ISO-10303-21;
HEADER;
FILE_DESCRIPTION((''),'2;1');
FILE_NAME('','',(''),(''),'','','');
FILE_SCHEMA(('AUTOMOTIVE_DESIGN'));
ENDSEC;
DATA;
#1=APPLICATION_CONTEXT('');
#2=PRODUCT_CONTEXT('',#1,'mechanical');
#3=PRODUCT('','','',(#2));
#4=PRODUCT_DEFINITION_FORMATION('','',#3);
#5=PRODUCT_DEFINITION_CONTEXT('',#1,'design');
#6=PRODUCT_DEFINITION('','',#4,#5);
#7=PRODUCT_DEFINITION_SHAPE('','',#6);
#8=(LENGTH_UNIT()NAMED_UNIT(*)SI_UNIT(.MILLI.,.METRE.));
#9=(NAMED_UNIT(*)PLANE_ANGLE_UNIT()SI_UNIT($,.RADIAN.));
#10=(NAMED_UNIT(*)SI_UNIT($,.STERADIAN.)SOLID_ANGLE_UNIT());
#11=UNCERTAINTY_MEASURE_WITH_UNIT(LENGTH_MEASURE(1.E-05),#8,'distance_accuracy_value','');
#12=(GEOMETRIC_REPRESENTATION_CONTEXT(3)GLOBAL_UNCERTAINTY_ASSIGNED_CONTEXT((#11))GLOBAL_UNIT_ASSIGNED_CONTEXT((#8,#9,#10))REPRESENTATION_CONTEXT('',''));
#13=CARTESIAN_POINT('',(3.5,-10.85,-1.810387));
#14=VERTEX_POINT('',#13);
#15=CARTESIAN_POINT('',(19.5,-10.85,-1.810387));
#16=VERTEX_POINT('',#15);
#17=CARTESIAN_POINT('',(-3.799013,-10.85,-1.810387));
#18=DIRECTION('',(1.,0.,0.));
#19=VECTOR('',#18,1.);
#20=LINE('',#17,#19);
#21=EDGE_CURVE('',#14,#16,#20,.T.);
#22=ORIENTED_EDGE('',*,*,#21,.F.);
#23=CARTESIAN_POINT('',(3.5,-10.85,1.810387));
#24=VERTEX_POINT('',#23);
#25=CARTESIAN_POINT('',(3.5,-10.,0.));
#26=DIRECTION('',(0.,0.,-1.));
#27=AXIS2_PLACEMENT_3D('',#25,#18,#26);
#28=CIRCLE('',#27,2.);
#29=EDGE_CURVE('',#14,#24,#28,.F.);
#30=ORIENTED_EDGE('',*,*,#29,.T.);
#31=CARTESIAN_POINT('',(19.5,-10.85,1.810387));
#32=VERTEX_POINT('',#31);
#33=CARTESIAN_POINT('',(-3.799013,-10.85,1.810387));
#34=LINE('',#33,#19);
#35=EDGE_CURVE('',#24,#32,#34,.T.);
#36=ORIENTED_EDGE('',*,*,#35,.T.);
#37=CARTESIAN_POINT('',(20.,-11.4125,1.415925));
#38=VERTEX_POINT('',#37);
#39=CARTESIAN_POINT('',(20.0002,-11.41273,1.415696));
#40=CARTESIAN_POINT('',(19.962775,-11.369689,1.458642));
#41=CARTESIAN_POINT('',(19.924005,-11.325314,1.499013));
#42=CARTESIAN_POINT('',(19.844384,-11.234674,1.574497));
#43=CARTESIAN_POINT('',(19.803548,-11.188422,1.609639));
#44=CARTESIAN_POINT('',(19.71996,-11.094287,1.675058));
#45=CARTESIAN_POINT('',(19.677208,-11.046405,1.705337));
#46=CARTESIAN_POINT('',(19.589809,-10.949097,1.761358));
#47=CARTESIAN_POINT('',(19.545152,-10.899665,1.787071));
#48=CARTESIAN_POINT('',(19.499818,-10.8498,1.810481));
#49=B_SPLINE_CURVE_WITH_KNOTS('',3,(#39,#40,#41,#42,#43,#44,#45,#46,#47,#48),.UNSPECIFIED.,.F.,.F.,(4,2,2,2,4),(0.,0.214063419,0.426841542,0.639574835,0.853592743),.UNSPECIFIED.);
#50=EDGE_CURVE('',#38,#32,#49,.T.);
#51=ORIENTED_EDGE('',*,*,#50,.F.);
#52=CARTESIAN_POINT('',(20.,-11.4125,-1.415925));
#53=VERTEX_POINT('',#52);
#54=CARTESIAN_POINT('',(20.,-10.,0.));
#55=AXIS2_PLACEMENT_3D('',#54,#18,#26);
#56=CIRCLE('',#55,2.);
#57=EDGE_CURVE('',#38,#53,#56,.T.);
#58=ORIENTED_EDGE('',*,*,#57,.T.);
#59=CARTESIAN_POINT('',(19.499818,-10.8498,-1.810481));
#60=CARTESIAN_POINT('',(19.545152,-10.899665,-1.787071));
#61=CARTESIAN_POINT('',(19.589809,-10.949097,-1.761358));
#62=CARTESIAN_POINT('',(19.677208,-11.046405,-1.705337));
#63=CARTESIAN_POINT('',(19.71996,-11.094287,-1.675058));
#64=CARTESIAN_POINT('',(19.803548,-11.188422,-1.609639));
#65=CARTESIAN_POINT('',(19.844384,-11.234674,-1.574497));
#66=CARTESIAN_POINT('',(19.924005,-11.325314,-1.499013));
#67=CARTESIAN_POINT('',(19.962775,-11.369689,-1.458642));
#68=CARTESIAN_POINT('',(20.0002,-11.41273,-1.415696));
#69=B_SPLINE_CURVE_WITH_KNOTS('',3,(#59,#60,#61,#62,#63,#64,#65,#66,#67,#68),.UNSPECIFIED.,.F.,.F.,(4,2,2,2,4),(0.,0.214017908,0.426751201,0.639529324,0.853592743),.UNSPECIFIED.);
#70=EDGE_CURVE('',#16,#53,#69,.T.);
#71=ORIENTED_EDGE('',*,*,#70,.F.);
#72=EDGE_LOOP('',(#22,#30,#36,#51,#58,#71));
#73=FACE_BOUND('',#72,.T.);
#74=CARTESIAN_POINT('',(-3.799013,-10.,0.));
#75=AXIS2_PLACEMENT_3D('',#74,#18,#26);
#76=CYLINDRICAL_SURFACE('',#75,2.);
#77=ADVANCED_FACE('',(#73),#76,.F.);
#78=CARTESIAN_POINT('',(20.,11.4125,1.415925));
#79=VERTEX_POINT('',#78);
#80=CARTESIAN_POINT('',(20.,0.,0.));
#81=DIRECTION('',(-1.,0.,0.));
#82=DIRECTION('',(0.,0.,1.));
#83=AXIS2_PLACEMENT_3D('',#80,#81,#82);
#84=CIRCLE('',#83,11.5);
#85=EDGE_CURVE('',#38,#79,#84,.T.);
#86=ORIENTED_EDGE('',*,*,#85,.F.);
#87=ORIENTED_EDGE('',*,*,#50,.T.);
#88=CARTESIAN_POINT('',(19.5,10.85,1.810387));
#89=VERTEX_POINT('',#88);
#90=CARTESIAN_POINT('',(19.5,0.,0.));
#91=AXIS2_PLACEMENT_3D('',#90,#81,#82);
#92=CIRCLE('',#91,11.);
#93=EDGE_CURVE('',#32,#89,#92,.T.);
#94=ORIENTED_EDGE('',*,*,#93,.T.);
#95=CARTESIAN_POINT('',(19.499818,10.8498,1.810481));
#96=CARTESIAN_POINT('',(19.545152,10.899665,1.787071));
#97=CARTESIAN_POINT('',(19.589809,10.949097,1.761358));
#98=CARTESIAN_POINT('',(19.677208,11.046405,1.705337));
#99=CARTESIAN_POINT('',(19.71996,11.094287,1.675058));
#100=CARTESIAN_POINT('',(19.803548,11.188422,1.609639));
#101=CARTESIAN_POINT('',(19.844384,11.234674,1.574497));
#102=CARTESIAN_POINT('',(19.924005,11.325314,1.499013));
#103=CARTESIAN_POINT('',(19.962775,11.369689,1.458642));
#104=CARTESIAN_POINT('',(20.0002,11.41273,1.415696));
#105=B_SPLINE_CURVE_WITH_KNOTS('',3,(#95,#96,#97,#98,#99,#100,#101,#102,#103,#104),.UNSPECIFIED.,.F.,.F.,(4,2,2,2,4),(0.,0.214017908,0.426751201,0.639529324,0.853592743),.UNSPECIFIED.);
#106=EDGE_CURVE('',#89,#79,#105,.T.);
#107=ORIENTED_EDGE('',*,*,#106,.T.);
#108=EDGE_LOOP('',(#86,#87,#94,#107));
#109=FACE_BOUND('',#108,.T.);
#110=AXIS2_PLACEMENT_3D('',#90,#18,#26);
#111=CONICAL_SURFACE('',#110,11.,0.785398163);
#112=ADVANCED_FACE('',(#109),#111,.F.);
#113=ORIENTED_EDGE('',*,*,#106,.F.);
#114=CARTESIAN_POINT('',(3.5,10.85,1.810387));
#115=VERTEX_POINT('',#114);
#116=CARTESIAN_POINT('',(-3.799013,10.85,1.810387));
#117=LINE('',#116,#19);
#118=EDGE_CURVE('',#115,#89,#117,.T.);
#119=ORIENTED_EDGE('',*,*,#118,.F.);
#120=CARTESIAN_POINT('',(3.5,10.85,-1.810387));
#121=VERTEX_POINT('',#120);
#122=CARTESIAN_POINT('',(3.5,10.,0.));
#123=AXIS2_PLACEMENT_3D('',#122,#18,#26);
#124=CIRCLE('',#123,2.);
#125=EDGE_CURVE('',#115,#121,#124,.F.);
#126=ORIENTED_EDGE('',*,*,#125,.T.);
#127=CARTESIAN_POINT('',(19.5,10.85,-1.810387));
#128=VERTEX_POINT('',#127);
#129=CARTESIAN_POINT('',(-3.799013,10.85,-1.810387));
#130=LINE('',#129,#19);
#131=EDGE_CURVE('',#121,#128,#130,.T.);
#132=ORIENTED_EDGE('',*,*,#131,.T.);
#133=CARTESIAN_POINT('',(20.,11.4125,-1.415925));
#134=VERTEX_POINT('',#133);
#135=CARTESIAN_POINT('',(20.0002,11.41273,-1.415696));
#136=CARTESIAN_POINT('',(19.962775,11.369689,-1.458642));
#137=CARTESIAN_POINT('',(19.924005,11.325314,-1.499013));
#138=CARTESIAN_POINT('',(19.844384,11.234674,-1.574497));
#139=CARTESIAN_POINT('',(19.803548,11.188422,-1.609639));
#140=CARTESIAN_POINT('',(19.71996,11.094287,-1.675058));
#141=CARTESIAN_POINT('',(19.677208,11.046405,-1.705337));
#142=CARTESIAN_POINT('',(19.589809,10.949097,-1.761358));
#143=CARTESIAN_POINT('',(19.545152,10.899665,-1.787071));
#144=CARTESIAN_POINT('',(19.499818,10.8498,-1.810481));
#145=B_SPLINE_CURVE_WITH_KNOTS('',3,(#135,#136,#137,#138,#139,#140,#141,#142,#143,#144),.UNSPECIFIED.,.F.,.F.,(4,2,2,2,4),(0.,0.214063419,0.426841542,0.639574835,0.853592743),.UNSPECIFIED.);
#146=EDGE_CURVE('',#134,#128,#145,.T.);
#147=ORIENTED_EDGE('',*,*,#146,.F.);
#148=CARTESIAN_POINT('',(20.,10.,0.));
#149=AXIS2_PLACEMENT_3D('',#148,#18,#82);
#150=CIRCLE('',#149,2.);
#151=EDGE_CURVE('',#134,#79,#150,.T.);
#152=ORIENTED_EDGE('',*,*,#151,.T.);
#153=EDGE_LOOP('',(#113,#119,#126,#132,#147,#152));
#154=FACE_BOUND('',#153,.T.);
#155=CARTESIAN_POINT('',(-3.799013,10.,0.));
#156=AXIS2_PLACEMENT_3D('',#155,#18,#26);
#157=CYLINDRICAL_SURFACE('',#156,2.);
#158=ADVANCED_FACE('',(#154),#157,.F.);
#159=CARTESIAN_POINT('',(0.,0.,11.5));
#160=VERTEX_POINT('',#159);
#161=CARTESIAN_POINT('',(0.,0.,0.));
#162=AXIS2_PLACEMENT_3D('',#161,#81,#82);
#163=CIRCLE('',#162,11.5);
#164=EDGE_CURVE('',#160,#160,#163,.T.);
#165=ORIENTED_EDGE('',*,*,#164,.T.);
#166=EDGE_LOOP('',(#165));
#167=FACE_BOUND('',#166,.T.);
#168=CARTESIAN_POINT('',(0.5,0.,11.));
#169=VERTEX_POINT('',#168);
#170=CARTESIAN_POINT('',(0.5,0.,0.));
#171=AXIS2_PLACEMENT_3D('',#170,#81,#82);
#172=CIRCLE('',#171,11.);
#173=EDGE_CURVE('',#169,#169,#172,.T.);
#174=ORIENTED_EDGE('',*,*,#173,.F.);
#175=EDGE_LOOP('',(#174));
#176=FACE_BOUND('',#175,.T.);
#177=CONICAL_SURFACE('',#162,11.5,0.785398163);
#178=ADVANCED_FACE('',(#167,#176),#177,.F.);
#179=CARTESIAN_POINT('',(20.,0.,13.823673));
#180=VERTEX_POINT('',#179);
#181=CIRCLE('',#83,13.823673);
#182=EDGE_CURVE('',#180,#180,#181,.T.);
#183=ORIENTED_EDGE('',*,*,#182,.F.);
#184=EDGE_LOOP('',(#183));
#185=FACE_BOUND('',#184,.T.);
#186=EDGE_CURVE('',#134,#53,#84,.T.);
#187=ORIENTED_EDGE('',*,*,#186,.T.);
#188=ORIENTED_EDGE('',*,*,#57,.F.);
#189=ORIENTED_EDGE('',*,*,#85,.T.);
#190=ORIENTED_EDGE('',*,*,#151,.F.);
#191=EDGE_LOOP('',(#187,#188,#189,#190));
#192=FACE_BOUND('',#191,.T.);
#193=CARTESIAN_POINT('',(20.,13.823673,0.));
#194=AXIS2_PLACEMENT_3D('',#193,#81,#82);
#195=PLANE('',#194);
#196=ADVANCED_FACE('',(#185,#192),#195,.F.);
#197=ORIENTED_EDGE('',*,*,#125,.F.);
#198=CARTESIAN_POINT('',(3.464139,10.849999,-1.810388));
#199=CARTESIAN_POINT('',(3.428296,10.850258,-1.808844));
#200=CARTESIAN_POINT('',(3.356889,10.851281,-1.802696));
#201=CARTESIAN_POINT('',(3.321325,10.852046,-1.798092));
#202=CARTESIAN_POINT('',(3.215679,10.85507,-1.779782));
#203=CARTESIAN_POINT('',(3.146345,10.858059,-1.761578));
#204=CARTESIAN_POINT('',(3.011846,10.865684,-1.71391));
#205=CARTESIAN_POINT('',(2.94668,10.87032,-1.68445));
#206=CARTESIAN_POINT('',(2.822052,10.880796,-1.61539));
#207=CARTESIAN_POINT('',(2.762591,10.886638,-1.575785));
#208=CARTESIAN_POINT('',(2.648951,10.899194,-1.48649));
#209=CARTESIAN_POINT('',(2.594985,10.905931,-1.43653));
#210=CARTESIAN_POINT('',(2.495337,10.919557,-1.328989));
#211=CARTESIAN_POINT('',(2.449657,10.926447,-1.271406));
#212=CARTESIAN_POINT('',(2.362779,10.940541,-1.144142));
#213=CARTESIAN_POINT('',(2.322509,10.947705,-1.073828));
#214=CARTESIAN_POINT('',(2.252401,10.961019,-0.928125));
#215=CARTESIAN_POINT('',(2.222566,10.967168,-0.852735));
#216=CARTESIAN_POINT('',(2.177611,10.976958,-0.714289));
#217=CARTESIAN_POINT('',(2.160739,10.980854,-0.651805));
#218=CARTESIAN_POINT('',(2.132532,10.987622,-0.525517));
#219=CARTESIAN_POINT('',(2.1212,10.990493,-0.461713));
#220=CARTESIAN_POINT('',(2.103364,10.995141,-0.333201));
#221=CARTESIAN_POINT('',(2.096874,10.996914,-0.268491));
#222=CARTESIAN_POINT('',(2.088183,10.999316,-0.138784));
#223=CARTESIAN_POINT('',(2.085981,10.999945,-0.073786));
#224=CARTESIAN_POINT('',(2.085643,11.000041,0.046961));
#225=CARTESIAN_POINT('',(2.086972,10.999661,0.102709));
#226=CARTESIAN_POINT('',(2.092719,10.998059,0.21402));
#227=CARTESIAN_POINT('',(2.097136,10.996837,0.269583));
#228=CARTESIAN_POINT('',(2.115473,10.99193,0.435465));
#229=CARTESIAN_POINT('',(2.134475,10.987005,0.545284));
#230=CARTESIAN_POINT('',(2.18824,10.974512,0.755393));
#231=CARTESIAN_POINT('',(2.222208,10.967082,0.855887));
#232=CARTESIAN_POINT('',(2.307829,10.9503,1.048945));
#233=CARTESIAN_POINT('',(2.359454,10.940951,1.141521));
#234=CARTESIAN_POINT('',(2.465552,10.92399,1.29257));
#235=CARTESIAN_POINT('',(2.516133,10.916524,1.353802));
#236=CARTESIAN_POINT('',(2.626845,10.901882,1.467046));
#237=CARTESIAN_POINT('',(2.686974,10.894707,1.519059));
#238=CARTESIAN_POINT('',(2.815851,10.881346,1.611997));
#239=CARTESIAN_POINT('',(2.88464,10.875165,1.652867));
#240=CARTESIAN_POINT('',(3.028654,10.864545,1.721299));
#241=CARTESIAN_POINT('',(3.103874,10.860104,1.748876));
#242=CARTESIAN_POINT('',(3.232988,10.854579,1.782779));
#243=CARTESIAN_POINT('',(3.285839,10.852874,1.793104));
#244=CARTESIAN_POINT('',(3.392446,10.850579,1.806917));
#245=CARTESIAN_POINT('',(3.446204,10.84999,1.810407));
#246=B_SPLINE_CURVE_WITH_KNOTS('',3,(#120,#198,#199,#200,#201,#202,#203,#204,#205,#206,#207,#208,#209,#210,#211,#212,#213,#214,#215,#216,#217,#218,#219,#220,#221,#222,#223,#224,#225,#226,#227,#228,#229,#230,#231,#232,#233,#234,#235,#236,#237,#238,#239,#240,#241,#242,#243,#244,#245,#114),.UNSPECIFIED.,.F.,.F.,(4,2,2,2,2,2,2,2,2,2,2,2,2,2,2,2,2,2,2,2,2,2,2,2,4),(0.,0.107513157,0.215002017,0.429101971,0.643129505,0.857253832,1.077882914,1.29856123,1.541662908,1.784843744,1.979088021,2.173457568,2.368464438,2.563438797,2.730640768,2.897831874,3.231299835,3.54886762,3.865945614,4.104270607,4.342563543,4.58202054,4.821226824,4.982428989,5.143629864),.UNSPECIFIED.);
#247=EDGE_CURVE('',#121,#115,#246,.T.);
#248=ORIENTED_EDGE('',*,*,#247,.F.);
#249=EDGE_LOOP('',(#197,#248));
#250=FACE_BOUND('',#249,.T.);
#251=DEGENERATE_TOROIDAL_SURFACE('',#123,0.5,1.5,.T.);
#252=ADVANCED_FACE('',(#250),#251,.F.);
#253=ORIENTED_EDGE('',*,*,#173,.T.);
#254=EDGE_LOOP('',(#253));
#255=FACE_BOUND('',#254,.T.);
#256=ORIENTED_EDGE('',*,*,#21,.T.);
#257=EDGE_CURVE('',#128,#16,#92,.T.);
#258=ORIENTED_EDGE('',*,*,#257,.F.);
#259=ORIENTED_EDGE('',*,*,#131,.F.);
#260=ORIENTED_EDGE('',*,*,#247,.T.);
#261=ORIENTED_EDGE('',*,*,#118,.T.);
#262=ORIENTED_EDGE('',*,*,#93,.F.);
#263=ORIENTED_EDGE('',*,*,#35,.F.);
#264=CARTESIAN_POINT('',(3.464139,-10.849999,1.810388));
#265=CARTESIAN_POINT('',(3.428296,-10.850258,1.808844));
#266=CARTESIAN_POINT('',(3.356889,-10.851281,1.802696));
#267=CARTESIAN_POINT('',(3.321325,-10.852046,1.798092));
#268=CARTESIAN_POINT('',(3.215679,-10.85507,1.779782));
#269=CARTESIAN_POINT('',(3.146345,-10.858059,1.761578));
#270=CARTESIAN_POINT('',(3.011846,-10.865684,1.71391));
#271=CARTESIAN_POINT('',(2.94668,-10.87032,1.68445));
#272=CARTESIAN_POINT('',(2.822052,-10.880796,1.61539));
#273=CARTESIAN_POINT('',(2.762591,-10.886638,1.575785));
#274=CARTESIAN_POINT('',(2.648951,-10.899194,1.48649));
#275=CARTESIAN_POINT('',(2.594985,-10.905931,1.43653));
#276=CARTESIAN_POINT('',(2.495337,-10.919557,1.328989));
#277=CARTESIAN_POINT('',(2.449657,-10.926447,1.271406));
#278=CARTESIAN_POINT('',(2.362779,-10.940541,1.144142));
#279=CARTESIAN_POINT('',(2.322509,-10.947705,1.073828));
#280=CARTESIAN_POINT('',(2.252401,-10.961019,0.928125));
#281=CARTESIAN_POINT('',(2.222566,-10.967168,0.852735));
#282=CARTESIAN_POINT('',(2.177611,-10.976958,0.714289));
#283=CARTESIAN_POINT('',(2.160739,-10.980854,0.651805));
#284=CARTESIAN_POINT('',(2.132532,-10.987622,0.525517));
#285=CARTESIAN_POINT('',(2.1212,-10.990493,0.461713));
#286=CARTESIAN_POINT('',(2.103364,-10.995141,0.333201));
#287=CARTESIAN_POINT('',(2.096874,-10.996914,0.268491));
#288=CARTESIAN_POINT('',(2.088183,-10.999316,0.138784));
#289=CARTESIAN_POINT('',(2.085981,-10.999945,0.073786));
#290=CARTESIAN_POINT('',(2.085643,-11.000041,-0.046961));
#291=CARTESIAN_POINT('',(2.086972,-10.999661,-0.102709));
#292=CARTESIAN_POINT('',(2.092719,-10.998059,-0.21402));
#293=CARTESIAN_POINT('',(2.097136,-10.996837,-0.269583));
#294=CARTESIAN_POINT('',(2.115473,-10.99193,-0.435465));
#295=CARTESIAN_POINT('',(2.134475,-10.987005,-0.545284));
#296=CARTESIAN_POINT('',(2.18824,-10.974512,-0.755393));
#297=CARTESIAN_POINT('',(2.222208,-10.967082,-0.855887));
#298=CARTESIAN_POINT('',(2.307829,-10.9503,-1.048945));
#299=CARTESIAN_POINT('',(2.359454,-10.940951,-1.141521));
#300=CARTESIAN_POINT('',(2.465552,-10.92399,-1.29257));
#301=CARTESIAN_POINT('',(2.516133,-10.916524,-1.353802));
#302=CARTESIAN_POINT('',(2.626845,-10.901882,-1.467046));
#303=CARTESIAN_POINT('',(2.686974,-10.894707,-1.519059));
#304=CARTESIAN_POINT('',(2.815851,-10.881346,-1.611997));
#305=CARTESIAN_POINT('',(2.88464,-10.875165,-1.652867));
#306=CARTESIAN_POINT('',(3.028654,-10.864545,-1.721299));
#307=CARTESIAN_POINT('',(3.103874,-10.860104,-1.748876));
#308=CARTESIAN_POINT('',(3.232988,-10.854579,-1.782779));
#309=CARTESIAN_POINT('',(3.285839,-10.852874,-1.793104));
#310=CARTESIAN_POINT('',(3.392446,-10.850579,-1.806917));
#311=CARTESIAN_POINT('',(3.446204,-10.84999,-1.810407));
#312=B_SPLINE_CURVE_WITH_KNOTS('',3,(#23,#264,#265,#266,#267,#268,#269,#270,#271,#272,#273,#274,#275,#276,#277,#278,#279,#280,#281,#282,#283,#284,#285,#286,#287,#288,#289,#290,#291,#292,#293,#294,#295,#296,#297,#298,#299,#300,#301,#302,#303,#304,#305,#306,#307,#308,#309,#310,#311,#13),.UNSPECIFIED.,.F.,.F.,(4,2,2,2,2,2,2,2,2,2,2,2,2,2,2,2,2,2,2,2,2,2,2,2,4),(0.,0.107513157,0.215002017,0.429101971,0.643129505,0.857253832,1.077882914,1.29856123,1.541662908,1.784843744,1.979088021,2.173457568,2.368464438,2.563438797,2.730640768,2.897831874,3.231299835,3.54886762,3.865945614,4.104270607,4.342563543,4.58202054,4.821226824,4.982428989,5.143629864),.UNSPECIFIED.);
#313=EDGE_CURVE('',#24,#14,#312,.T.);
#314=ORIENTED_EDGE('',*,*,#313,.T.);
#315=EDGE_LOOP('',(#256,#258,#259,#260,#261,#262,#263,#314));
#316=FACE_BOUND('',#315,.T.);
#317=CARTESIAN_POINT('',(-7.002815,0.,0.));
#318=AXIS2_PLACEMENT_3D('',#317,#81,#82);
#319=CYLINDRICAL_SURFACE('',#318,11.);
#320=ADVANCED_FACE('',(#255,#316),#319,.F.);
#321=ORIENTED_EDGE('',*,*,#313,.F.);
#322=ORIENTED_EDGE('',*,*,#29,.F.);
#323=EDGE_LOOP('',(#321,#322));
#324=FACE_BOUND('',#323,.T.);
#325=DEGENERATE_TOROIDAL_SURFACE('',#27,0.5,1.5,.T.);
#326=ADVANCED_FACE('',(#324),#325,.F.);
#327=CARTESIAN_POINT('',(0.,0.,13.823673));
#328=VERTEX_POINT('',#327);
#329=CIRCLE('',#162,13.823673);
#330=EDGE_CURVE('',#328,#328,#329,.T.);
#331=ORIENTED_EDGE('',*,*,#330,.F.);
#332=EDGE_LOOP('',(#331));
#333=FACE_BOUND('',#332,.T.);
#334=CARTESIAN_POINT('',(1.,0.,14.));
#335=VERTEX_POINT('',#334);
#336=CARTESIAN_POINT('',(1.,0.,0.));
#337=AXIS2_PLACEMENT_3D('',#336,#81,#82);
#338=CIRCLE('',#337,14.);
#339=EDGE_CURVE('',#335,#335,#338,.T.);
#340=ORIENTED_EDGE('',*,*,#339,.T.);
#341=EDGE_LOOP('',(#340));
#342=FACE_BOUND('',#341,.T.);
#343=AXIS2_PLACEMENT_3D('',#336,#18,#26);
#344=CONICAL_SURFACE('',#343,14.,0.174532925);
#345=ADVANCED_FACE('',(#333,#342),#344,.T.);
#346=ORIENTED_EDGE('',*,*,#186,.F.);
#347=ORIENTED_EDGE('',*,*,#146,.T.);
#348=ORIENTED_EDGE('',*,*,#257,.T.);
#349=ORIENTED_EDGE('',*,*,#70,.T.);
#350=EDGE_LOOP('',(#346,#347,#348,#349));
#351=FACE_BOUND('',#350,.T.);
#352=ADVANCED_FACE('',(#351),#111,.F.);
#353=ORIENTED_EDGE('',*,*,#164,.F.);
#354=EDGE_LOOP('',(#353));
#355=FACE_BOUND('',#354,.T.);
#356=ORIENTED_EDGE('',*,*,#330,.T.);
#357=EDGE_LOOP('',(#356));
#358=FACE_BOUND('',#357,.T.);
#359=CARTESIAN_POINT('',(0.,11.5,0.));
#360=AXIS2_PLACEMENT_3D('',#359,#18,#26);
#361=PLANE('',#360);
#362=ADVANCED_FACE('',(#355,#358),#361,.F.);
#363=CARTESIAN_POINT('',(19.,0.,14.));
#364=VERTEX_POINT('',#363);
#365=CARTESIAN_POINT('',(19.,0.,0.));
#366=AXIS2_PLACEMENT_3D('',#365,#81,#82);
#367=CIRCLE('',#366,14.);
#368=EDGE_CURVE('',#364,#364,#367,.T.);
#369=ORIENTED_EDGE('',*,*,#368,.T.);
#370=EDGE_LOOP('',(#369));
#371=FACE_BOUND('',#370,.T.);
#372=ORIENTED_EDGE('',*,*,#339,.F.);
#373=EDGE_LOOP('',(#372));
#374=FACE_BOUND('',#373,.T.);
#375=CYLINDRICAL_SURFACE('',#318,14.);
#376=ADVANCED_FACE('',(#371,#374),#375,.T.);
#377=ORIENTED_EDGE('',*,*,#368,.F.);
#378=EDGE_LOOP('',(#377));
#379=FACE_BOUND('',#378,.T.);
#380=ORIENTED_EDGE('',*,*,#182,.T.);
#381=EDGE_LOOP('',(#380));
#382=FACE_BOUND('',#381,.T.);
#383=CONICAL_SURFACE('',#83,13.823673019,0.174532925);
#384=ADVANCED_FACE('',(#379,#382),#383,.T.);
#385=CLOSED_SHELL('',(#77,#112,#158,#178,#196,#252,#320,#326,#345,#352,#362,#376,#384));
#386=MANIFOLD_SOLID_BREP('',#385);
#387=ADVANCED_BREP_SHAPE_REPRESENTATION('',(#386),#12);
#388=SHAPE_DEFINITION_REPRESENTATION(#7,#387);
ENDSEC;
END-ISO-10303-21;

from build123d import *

# Parameters (mm, degrees)
CUT_EXTRUDE_START   = -18
CUT_EXTRUDE_1_DEPTH = 18
FILLET_1_R          = 1.5


with BuildPart() as part:
    # Эскиз1 → Повернуть1 (revolve)
    with BuildSketch(Plane.XY, mode=Mode.PRIVATE) as revolve_1_sk:
        Polygon((0, 11.5), (0, 13.823673019), (1, 14), (19, 14), (20, 13.823673019), (20, 11.5), (19.5, 11), (0.5, 11), align=None)
    revolve(revolve_1_sk.sketch.rotate(Axis((-7.002814628, 0, 0), (1, 0, 0)), 90), axis=Axis((-7.002814628, 0, 0), (1, 0, 0)))

    # Эскиз2 → Вырез-Вытянуть1 (cut)
    with BuildSketch(Plane(origin=(20, 0, 0), x_dir=(0, 0, -1), z_dir=(1, 0, 0)).offset(CUT_EXTRUDE_START)):
        with BuildLine():
            ThreePointArc((-1.810386699, -10.85), (0, -11), (1.810386699, -10.85))
            ThreePointArc((1.810386699, -10.85), (0, -12), (-1.810386699, -10.85))
        make_face()
        with BuildLine():
            ThreePointArc((-1.810386699, 10.85), (0, 12), (1.810386699, 10.85))
            ThreePointArc((1.810386699, 10.85), (0, 11), (-1.810386699, 10.85))
        make_face()
    extrude(amount=CUT_EXTRUDE_1_DEPTH, mode=Mode.SUBTRACT)

    # Скругление1
    # the kernel refuses this fillet: 1.5 mm, written as the material it adds along each edge
    with BuildSketch(Plane(origin=(2, 10, 0), x_dir=(0, -0.9911428491773114, 0.132800047156171), z_dir=(0, -0.132800047156171, -0.9911428491773114))) as fillet_1_piece_1_section:
        with BuildLine():
            CenterArc((2 - FILLET_1_R, -FILLET_1_R), FILLET_1_R, 0, 90)
            Line((2, -FILLET_1_R), (2, 0))
            Line((2, 0), (2 - FILLET_1_R, 0))
        make_face()
    fillet_1_piece_1 = revolve(axis=Axis((2, 10, 0), (-1, 0, 0)), revolution_arc=344.737147097, mode=Mode.PRIVATE)
    fillet_1_piece_1 = fillet_1_piece_1 - Plane(origin=(2.626804304, 0, 0), x_dir=(0, 0, 1), z_dir=(-1, 0, 0)) * Cylinder(11, 8, mode=Mode.PRIVATE)
    add(fillet_1_piece_1)
    with BuildSketch(Plane(origin=(2, -10, 0), x_dir=(0, 0.9911428491773114, -0.132800047156171), z_dir=(0, 0.132800047156171, 0.9911428491773114))) as fillet_1_piece_2_section:
        with BuildLine():
            CenterArc((2 - FILLET_1_R, -FILLET_1_R), FILLET_1_R, 0, 90)
            Line((2, -FILLET_1_R), (2, 0))
            Line((2, 0), (2 - FILLET_1_R, 0))
        make_face()
    fillet_1_piece_2 = revolve(axis=Axis((2, -10, 0), (-1, 0, 0)), revolution_arc=344.737147097, mode=Mode.PRIVATE)
    fillet_1_piece_2 = fillet_1_piece_2 - Plane(origin=(2.626804304, 0, 0), x_dir=(0, 0, 1), z_dir=(-1, 0, 0)) * Cylinder(11, 8, mode=Mode.PRIVATE)
    add(fillet_1_piece_2)


solid = part.part
